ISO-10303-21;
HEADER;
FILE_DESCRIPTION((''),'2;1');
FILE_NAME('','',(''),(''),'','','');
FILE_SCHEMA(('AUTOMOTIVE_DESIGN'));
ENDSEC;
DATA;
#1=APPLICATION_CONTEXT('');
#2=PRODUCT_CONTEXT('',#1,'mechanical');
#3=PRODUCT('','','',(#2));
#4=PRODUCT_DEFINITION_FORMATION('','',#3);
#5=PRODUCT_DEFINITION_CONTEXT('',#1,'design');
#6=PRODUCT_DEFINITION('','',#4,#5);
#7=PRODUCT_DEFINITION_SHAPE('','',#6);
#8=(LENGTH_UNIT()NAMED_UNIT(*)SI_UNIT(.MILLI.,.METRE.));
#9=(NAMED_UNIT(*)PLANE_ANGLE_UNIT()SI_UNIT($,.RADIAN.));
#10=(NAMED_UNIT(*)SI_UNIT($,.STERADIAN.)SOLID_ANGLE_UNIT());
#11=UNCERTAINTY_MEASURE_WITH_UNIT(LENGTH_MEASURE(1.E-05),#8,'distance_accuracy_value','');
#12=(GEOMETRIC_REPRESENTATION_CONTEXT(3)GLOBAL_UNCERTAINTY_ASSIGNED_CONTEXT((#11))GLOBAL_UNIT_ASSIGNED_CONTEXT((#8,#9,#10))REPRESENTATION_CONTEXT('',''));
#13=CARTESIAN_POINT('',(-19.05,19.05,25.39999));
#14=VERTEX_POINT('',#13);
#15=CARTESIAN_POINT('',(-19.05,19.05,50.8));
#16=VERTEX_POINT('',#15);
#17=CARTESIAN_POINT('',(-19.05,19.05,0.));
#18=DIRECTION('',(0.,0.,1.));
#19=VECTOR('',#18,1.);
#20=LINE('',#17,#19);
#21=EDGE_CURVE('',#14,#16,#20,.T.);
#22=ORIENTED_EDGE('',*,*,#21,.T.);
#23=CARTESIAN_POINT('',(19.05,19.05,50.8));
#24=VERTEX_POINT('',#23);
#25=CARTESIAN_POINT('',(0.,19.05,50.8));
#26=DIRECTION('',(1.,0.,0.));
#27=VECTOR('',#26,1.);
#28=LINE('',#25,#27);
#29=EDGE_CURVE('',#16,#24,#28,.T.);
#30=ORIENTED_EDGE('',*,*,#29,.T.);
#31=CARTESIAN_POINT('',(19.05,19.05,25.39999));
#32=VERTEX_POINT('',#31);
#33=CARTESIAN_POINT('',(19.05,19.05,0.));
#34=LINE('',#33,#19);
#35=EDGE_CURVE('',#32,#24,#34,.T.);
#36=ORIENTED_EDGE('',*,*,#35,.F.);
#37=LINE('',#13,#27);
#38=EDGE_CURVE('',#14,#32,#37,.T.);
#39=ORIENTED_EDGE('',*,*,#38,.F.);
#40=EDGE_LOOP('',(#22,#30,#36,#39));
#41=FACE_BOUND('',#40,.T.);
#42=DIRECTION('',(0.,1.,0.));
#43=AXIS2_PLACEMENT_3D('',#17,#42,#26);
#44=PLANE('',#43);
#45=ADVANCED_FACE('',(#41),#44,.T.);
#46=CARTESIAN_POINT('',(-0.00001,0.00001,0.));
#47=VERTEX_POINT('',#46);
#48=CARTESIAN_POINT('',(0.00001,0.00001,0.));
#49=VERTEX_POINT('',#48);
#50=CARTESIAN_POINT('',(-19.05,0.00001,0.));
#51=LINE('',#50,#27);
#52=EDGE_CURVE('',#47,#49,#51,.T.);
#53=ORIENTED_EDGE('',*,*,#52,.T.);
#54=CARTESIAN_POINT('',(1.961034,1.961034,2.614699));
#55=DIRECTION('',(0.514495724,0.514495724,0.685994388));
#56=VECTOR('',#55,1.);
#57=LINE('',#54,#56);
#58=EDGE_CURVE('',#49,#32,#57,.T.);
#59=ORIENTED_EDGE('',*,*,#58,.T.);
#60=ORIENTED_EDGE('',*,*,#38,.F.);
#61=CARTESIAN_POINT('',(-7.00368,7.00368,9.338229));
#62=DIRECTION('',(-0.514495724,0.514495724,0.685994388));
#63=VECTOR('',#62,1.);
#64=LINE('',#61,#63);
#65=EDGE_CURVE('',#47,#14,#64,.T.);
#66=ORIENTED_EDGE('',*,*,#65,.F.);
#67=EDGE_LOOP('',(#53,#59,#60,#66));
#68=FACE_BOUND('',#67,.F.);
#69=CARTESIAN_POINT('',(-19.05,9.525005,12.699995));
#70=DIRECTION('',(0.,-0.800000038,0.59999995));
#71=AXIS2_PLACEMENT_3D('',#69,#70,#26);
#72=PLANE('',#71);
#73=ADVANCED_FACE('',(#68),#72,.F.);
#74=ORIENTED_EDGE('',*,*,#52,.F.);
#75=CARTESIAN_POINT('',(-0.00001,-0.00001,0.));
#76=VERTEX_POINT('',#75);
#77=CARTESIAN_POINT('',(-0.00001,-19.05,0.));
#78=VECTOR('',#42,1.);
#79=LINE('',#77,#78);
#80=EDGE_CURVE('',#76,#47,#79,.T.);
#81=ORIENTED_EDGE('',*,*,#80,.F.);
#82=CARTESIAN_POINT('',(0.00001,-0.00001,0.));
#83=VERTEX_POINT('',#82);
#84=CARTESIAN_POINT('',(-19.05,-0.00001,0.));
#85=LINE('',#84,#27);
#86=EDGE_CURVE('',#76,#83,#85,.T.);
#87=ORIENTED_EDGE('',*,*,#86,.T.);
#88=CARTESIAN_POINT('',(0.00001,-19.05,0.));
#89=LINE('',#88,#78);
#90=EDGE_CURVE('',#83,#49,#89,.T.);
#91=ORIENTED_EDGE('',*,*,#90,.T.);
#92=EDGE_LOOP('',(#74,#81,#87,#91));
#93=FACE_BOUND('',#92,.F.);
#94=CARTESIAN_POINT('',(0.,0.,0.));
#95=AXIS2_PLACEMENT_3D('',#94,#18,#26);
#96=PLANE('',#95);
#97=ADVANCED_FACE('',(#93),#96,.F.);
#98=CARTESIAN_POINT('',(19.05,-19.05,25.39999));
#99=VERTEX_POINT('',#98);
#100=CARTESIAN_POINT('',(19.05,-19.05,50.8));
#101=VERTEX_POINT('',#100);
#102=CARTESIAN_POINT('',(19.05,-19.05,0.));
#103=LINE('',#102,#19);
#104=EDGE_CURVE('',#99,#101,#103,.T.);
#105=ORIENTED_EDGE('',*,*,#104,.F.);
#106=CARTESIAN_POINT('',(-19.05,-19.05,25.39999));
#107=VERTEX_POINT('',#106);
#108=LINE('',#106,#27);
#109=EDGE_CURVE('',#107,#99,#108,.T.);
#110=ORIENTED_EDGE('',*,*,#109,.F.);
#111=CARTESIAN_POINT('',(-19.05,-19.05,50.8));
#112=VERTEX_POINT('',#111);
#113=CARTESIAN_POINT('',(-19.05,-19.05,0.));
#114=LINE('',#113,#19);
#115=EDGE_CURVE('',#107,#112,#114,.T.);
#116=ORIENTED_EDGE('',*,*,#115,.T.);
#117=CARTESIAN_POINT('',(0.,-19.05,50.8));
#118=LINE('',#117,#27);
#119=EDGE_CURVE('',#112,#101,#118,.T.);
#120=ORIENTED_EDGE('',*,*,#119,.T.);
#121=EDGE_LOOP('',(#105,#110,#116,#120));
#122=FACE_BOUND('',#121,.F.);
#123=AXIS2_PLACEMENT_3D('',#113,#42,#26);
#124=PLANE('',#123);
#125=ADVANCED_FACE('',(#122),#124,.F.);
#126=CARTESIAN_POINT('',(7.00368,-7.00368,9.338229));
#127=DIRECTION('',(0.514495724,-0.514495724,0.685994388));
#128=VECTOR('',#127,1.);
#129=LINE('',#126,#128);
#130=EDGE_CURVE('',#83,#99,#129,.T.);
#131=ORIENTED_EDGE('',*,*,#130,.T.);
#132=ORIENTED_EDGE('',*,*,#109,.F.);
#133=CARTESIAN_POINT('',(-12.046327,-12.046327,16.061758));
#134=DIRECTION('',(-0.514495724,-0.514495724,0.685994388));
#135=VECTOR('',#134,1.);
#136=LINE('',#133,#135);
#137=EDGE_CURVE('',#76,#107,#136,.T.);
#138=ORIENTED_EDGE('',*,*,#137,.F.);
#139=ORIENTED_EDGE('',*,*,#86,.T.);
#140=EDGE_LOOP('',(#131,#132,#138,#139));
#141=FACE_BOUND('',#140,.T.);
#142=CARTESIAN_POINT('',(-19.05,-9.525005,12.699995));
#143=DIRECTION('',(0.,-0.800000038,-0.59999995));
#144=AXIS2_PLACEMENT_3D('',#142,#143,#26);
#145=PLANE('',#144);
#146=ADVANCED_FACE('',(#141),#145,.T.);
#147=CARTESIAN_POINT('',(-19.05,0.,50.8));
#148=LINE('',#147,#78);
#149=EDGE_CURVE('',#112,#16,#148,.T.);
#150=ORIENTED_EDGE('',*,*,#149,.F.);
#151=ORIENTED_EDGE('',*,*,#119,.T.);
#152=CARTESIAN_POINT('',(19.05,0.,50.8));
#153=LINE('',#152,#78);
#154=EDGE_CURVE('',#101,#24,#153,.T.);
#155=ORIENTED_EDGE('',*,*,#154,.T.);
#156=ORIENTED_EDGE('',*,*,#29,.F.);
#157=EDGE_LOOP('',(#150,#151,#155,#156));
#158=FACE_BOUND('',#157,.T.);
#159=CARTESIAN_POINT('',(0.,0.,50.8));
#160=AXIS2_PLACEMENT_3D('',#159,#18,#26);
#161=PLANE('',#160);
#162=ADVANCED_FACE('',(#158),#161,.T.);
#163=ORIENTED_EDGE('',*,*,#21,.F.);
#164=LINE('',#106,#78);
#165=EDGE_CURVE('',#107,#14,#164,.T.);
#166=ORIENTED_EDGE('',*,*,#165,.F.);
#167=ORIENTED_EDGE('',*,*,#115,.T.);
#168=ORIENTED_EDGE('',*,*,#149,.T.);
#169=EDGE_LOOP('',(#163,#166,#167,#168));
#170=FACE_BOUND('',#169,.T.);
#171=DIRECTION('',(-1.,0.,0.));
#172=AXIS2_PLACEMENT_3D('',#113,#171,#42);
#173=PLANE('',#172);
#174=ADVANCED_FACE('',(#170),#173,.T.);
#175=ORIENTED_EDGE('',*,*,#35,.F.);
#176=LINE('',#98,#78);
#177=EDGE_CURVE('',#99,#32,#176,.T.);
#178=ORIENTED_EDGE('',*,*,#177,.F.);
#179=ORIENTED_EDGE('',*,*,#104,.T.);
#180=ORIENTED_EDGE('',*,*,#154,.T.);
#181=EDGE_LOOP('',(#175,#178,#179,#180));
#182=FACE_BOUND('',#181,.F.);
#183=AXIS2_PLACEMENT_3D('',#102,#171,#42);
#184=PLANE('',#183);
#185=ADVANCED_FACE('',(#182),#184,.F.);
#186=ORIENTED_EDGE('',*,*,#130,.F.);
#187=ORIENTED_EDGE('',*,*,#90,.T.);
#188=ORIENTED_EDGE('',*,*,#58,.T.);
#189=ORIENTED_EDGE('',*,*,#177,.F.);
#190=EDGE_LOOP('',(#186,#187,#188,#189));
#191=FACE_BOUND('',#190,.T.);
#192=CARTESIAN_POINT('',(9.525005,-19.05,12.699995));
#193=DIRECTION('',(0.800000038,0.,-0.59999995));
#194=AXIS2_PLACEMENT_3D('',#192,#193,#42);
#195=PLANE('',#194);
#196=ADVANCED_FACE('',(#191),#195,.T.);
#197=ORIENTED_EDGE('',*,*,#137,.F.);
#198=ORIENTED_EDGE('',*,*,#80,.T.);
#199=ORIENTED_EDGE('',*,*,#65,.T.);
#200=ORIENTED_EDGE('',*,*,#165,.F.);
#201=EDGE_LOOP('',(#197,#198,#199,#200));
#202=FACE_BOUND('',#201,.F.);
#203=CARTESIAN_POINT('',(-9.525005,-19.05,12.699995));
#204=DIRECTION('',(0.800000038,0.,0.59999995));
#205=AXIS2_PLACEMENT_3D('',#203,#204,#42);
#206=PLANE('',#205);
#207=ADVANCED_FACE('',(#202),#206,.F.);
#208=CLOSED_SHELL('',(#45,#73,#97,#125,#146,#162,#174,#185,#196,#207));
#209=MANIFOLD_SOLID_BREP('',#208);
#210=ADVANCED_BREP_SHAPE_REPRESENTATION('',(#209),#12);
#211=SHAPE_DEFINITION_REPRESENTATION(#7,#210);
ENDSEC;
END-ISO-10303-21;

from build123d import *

# Parameters (mm, degrees)
F0_W     = 38.1
F0_H     = 38.1
F1_DEPTH = 50.8
F2_SIZE2 = 25.39999
F2_SIZE  = 19.04999


# Not quite as in the source:
# - a fillet or chamfer is up to 0.001 mm smaller than in the source, because OpenCascade refuses the exact size


with BuildPart() as f1:
    # F0 (on Top) → F1 (new body)
    with BuildSketch(Plane.XY):
        Rectangle(F0_W, F0_H)
    extrude(amount=F1_DEPTH)

    # F2 (size 19.05 and 25.4 in the source; OpenCascade refuses exactly that, so slightly less here)
    f2_edges = [f1.edges().sort_by_distance(p)[0] for p in [
        (0, 19.05, 0),
        (-19.05, 0, 0),
        (0, -19.05, 0),
        (19.05, 0, 0),
    ]]
    f2_side = f1.faces().sort_by_distance((0, 0, 0))[0]
    chamfer(f2_edges, length=F2_SIZE, length2=F2_SIZE2, reference=f2_side)


solid = f1.part
